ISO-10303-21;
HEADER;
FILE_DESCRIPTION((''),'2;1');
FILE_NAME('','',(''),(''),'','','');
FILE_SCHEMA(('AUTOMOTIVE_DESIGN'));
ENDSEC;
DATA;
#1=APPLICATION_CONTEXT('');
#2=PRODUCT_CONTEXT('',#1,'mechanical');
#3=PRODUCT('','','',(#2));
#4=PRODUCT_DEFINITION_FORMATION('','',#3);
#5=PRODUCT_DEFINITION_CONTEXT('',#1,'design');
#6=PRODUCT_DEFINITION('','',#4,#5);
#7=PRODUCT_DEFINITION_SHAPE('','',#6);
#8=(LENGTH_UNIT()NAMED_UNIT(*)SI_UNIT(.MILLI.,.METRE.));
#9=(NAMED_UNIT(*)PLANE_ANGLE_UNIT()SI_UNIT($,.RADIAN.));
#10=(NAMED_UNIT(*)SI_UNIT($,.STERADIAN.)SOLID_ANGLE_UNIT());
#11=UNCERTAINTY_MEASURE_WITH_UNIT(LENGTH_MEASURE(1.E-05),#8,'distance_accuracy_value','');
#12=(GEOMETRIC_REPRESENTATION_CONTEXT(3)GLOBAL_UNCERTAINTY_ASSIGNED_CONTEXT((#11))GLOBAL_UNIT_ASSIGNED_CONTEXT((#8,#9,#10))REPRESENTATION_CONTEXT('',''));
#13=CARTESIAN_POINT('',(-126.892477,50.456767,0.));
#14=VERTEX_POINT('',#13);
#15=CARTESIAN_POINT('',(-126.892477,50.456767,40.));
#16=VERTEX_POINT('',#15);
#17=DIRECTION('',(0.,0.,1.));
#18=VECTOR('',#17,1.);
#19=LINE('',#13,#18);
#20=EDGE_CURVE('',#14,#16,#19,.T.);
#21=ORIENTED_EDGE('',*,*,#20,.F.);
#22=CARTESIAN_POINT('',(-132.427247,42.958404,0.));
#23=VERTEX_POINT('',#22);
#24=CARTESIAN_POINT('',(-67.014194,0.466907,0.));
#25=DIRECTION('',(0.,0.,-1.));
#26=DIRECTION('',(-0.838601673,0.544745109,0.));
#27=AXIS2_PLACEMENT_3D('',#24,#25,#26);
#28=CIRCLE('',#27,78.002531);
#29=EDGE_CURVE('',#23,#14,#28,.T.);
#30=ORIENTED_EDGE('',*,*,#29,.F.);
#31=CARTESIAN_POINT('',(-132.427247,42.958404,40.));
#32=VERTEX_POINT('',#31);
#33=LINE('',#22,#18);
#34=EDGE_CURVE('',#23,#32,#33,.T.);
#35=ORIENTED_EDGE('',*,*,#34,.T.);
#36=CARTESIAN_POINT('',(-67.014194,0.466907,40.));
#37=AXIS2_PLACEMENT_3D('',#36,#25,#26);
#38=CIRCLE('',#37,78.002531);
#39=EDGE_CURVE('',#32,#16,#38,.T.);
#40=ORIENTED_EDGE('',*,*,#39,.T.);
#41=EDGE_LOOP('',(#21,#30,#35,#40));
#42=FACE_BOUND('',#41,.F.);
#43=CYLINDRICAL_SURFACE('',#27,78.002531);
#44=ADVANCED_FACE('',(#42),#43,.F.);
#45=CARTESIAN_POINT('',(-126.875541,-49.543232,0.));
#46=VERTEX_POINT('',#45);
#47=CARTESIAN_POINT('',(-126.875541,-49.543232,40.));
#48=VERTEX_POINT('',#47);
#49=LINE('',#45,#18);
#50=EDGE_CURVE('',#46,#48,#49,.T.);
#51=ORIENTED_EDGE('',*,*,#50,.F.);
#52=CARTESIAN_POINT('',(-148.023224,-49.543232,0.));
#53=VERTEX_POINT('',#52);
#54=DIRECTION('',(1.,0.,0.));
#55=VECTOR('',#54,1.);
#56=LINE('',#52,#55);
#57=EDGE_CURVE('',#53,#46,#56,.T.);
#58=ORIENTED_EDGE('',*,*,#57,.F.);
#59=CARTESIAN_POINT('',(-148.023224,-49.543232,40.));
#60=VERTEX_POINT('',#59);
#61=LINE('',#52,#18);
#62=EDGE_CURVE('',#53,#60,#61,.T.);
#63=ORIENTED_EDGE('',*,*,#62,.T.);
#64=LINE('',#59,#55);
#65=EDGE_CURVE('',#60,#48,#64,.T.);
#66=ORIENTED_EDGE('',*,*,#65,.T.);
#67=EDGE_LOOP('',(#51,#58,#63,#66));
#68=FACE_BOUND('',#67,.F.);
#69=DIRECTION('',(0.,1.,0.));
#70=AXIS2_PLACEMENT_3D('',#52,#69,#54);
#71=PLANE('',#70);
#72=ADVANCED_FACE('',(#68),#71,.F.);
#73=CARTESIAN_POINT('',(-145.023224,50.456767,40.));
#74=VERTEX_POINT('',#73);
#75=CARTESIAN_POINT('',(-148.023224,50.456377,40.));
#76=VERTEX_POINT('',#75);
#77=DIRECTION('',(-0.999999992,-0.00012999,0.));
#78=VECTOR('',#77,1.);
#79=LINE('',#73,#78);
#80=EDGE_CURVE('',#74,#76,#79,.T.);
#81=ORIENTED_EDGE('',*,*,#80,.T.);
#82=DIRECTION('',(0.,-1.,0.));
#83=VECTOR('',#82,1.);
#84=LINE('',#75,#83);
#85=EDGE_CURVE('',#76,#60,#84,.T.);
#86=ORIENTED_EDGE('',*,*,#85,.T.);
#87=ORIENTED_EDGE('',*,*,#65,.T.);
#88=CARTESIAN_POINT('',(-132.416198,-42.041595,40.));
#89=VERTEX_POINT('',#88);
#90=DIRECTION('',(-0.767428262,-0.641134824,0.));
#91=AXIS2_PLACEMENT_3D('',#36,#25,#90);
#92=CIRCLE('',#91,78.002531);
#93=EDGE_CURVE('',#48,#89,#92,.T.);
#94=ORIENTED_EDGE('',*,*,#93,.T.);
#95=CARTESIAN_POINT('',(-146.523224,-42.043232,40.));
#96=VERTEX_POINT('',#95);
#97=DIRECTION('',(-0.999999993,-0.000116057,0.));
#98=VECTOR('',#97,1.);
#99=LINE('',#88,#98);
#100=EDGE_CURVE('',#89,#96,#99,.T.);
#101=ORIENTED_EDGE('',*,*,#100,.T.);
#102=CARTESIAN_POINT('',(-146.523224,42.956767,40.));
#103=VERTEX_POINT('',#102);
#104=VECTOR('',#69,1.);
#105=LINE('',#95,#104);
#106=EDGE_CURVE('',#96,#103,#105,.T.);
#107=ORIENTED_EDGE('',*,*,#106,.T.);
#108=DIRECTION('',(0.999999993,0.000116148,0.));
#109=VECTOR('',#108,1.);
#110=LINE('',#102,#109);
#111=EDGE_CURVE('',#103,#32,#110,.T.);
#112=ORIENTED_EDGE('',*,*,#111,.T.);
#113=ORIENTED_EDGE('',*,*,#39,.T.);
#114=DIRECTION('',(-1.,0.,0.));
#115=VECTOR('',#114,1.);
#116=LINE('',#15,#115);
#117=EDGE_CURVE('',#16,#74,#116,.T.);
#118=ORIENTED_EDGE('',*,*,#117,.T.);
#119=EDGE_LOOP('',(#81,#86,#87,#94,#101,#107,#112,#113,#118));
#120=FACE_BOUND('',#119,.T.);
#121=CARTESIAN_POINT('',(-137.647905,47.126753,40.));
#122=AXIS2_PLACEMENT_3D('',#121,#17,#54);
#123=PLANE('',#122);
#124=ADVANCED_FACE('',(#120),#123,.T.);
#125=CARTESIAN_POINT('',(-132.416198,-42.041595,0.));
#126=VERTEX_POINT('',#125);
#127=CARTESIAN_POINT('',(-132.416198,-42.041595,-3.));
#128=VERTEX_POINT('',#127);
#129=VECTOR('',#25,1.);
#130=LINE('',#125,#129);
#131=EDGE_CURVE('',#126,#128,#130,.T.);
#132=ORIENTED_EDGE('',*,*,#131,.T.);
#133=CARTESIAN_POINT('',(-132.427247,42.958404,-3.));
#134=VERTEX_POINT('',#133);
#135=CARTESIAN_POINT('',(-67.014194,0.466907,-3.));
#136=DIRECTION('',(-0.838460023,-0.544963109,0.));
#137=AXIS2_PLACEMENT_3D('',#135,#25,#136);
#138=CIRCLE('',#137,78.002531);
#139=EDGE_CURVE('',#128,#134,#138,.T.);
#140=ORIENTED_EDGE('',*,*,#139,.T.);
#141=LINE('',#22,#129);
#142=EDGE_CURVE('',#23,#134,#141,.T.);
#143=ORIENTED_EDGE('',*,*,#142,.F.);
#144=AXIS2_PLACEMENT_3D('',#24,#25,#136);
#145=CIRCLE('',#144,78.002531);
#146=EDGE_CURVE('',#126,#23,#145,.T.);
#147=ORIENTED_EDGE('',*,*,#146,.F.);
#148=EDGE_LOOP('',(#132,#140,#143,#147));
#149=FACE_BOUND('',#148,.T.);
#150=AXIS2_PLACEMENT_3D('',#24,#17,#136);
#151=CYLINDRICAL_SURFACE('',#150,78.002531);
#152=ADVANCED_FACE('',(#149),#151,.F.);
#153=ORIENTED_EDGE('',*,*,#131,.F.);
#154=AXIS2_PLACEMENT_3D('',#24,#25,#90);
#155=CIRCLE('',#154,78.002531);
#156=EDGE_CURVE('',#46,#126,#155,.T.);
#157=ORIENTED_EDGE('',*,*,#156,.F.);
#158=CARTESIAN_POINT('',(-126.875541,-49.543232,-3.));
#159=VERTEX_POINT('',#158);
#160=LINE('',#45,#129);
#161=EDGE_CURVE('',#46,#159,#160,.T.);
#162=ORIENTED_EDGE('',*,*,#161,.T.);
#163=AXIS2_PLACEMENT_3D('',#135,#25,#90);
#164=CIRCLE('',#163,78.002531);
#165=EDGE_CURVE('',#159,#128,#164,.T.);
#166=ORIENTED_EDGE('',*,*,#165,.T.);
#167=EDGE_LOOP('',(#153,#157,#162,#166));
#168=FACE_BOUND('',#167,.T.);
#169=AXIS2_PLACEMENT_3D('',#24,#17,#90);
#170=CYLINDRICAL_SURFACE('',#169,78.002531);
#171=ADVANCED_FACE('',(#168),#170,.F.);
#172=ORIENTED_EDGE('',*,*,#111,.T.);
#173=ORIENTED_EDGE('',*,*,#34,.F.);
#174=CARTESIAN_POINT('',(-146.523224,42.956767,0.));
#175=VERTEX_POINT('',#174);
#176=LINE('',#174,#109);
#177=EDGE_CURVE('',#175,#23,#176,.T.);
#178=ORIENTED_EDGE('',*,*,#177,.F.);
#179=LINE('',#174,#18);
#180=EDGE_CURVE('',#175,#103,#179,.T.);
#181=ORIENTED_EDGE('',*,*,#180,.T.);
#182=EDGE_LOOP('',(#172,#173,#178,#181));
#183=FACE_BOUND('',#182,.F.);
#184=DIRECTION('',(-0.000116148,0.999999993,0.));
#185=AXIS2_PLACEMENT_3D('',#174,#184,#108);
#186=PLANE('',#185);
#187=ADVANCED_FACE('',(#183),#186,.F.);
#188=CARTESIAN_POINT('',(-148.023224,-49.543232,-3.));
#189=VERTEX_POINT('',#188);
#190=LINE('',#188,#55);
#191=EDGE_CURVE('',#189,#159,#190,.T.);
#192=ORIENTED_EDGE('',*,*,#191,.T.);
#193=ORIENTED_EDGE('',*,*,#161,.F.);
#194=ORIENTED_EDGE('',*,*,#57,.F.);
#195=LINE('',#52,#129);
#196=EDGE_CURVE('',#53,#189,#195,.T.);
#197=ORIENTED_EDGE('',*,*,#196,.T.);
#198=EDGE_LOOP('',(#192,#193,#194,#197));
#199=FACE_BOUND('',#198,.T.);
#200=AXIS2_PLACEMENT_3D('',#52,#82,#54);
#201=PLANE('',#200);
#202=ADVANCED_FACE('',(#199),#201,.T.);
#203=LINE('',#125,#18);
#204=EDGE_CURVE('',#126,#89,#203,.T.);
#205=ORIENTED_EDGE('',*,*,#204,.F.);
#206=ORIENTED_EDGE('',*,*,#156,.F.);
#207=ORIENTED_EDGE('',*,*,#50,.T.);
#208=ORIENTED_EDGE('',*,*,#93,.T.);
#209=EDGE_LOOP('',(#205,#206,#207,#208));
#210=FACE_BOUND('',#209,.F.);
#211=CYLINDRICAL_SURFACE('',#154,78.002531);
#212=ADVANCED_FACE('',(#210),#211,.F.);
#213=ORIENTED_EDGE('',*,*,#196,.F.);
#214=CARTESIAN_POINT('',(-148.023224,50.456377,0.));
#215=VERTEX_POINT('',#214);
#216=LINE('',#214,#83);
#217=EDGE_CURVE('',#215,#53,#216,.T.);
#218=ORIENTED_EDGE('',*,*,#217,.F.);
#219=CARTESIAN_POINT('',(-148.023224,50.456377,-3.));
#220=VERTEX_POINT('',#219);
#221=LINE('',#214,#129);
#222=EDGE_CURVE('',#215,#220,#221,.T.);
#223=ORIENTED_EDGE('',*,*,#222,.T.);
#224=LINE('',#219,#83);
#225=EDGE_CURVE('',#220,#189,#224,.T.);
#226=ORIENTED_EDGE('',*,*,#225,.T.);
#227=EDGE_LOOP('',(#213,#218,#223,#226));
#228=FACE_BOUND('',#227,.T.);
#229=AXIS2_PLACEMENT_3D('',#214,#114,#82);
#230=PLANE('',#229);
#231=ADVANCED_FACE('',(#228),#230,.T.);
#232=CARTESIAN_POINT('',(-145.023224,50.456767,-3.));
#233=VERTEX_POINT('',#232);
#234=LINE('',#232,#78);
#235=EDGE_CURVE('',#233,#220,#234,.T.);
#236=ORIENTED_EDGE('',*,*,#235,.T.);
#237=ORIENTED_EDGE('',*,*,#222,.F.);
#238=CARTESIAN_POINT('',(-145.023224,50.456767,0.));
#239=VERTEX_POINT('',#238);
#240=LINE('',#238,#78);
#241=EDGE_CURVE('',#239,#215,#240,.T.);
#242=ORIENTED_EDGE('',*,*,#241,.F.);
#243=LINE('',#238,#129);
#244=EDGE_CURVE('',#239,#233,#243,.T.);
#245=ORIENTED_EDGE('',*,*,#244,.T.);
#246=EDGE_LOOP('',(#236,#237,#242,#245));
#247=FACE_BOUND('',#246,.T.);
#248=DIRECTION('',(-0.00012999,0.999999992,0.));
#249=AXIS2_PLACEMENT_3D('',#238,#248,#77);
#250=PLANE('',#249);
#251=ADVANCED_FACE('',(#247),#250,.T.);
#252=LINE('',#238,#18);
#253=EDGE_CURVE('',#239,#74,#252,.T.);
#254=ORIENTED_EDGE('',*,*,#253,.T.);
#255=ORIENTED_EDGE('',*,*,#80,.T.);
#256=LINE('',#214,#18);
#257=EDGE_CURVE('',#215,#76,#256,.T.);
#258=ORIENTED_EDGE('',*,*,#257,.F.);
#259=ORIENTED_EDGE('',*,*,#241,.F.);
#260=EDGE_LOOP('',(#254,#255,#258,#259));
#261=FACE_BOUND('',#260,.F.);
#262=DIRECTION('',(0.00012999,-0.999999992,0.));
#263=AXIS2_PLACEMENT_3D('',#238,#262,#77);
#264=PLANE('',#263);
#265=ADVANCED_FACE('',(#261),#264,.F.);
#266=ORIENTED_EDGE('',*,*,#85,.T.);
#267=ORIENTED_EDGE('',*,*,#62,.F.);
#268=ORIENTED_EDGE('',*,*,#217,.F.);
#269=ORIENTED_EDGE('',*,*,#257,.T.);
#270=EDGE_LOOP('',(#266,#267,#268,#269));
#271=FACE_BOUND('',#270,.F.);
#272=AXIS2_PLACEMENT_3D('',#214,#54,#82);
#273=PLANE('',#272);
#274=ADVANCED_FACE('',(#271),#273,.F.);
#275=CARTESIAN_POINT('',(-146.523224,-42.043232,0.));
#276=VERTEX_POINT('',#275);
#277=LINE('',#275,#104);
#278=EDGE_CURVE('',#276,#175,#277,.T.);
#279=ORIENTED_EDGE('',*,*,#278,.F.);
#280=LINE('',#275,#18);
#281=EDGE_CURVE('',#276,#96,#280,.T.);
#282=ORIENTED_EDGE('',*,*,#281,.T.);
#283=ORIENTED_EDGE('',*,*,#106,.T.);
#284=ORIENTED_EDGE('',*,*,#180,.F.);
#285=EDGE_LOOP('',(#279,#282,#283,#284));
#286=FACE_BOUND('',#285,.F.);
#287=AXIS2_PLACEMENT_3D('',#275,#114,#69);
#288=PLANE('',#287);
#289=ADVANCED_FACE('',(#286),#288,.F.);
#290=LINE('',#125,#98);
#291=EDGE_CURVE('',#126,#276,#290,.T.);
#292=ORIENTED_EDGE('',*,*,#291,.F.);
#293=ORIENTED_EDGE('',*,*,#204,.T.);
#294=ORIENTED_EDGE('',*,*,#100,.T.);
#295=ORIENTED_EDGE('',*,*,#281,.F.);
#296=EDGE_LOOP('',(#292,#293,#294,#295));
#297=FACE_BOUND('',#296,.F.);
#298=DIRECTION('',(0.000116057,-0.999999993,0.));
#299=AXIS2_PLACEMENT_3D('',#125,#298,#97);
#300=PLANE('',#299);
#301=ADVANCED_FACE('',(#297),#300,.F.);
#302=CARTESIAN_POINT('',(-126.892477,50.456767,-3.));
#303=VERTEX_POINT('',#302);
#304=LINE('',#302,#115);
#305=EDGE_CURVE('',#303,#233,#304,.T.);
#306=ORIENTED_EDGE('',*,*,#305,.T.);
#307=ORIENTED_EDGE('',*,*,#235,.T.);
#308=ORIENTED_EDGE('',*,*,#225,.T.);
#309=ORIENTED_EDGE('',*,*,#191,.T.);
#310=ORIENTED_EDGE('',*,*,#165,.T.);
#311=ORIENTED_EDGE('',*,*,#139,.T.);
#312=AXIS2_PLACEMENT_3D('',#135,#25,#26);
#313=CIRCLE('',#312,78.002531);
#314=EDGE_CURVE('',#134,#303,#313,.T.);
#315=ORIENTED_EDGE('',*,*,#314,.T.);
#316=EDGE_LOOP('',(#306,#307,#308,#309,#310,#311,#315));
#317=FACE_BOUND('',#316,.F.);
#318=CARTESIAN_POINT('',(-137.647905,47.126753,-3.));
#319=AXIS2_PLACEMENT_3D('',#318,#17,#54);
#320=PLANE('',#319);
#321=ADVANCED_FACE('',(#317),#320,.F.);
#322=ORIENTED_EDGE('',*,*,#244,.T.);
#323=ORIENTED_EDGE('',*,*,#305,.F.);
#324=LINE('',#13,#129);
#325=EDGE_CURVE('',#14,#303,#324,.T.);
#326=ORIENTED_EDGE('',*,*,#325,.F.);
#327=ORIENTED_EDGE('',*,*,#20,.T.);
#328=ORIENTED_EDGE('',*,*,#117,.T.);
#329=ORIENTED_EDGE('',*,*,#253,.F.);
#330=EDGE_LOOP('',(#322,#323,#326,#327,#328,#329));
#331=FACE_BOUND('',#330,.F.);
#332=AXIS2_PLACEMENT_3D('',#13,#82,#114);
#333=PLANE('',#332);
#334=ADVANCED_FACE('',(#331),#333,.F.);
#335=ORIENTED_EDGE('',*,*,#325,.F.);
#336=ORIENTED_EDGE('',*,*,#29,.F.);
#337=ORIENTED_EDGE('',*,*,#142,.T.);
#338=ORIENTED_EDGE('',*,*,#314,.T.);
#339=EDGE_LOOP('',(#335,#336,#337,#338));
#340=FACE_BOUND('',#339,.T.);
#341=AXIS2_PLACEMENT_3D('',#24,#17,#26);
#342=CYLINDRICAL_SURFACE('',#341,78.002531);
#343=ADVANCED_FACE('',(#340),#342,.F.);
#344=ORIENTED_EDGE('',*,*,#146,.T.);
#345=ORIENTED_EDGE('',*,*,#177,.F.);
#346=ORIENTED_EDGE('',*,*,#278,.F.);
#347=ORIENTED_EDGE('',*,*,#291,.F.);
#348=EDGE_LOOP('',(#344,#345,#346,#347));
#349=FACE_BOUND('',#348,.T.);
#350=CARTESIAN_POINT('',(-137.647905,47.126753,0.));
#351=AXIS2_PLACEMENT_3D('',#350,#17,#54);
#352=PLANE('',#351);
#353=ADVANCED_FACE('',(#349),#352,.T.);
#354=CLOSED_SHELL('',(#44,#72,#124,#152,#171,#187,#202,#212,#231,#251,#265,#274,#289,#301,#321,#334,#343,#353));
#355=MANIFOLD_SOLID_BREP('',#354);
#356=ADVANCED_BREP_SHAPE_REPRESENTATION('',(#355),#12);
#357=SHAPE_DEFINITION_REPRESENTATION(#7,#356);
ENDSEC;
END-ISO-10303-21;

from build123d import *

# Parameters (mm, degrees)
F1_DEPTH = 3
F2_DEPTH = 40


with BuildPart() as f1:
    # F0 (on Top) → F1 (new body)
    with BuildSketch(Plane.XY):
        with BuildLine():
            Line((-126.8924768851, 50.456767044), (-145.0232239954, 50.456767044))
            Line((-145.0232239954, 50.456767044), (-146.5232239827, 50.4565720597))
            Line((-146.5232239827, 50.4565720597), (-146.5232239827, 42.9567671074))
            Line((-146.5232239827, 42.9567671074), (-132.4272471595, 42.958404326))
            ThreePointArc((-132.4272471595, 42.958404326), (-129.7719511525, 46.7903220915), (-126.8924768851, 50.456767044))
        make_face()
        Polygon((-146.5232239827, 42.9567671074), (-146.5232239827, 50.4565720597), (-148.02322397, 50.4563770754), (-148.02322397, -49.5432321111), (-146.5232239827, -49.5432321111), (-146.5232239827, -42.0432321745), align=None)
        with BuildLine():
            Line((-145.0102250409, -49.5432321111), (-126.8755409492, -49.5432321111))
            ThreePointArc((-126.8755409492, -49.5432321111), (-129.7580814774, -45.8752925216), (-132.4161980482, -42.0415949559))
            Line((-132.4161980482, -42.0415949559), (-146.5232239827, -42.0432321745))
            Line((-146.5232239827, -42.0432321745), (-146.5232239827, -49.5432321111))
            Line((-146.5232239827, -49.5432321111), (-145.0102250409, -49.5432321111))
        make_face()
        with BuildLine():
            ThreePointArc((-132.4161980482, -42.0415949559), (-145.0167245182, 0.4567674665), (-132.4272471595, 42.958404326))
            Line((-132.4272471595, 42.958404326), (-146.5232239827, 42.9567671074))
            Line((-146.5232239827, 42.9567671074), (-146.5232239827, -42.0432321745))
            Line((-146.5232239827, -42.0432321745), (-132.4161980482, -42.0415949559))
        make_face()
    extrude(amount=-F1_DEPTH)

    # F0 (on Top) → F2 (join)
    with BuildSketch(Plane.XY):
        with BuildLine():
            Line((-126.8924768851, 50.456767044), (-145.0232239954, 50.456767044))
            Line((-145.0232239954, 50.456767044), (-146.5232239827, 50.4565720597))
            Line((-146.5232239827, 50.4565720597), (-146.5232239827, 42.9567671074))
            Line((-146.5232239827, 42.9567671074), (-132.4272471595, 42.958404326))
            ThreePointArc((-132.4272471595, 42.958404326), (-129.7719511525, 46.7903220915), (-126.8924768851, 50.456767044))
        make_face()
        with BuildLine():
            Line((-145.0102250409, -49.5432321111), (-126.8755409492, -49.5432321111))
            ThreePointArc((-126.8755409492, -49.5432321111), (-129.7580814774, -45.8752925216), (-132.4161980482, -42.0415949559))
            Line((-132.4161980482, -42.0415949559), (-146.5232239827, -42.0432321745))
            Line((-146.5232239827, -42.0432321745), (-146.5232239827, -49.5432321111))
            Line((-146.5232239827, -49.5432321111), (-145.0102250409, -49.5432321111))
        make_face()
        Polygon((-146.5232239827, 42.9567671074), (-146.5232239827, 50.4565720597), (-148.02322397, 50.4563770754), (-148.02322397, -49.5432321111), (-146.5232239827, -49.5432321111), (-146.5232239827, -42.0432321745), align=None)
    extrude(amount=F2_DEPTH)


solid = f1.part
